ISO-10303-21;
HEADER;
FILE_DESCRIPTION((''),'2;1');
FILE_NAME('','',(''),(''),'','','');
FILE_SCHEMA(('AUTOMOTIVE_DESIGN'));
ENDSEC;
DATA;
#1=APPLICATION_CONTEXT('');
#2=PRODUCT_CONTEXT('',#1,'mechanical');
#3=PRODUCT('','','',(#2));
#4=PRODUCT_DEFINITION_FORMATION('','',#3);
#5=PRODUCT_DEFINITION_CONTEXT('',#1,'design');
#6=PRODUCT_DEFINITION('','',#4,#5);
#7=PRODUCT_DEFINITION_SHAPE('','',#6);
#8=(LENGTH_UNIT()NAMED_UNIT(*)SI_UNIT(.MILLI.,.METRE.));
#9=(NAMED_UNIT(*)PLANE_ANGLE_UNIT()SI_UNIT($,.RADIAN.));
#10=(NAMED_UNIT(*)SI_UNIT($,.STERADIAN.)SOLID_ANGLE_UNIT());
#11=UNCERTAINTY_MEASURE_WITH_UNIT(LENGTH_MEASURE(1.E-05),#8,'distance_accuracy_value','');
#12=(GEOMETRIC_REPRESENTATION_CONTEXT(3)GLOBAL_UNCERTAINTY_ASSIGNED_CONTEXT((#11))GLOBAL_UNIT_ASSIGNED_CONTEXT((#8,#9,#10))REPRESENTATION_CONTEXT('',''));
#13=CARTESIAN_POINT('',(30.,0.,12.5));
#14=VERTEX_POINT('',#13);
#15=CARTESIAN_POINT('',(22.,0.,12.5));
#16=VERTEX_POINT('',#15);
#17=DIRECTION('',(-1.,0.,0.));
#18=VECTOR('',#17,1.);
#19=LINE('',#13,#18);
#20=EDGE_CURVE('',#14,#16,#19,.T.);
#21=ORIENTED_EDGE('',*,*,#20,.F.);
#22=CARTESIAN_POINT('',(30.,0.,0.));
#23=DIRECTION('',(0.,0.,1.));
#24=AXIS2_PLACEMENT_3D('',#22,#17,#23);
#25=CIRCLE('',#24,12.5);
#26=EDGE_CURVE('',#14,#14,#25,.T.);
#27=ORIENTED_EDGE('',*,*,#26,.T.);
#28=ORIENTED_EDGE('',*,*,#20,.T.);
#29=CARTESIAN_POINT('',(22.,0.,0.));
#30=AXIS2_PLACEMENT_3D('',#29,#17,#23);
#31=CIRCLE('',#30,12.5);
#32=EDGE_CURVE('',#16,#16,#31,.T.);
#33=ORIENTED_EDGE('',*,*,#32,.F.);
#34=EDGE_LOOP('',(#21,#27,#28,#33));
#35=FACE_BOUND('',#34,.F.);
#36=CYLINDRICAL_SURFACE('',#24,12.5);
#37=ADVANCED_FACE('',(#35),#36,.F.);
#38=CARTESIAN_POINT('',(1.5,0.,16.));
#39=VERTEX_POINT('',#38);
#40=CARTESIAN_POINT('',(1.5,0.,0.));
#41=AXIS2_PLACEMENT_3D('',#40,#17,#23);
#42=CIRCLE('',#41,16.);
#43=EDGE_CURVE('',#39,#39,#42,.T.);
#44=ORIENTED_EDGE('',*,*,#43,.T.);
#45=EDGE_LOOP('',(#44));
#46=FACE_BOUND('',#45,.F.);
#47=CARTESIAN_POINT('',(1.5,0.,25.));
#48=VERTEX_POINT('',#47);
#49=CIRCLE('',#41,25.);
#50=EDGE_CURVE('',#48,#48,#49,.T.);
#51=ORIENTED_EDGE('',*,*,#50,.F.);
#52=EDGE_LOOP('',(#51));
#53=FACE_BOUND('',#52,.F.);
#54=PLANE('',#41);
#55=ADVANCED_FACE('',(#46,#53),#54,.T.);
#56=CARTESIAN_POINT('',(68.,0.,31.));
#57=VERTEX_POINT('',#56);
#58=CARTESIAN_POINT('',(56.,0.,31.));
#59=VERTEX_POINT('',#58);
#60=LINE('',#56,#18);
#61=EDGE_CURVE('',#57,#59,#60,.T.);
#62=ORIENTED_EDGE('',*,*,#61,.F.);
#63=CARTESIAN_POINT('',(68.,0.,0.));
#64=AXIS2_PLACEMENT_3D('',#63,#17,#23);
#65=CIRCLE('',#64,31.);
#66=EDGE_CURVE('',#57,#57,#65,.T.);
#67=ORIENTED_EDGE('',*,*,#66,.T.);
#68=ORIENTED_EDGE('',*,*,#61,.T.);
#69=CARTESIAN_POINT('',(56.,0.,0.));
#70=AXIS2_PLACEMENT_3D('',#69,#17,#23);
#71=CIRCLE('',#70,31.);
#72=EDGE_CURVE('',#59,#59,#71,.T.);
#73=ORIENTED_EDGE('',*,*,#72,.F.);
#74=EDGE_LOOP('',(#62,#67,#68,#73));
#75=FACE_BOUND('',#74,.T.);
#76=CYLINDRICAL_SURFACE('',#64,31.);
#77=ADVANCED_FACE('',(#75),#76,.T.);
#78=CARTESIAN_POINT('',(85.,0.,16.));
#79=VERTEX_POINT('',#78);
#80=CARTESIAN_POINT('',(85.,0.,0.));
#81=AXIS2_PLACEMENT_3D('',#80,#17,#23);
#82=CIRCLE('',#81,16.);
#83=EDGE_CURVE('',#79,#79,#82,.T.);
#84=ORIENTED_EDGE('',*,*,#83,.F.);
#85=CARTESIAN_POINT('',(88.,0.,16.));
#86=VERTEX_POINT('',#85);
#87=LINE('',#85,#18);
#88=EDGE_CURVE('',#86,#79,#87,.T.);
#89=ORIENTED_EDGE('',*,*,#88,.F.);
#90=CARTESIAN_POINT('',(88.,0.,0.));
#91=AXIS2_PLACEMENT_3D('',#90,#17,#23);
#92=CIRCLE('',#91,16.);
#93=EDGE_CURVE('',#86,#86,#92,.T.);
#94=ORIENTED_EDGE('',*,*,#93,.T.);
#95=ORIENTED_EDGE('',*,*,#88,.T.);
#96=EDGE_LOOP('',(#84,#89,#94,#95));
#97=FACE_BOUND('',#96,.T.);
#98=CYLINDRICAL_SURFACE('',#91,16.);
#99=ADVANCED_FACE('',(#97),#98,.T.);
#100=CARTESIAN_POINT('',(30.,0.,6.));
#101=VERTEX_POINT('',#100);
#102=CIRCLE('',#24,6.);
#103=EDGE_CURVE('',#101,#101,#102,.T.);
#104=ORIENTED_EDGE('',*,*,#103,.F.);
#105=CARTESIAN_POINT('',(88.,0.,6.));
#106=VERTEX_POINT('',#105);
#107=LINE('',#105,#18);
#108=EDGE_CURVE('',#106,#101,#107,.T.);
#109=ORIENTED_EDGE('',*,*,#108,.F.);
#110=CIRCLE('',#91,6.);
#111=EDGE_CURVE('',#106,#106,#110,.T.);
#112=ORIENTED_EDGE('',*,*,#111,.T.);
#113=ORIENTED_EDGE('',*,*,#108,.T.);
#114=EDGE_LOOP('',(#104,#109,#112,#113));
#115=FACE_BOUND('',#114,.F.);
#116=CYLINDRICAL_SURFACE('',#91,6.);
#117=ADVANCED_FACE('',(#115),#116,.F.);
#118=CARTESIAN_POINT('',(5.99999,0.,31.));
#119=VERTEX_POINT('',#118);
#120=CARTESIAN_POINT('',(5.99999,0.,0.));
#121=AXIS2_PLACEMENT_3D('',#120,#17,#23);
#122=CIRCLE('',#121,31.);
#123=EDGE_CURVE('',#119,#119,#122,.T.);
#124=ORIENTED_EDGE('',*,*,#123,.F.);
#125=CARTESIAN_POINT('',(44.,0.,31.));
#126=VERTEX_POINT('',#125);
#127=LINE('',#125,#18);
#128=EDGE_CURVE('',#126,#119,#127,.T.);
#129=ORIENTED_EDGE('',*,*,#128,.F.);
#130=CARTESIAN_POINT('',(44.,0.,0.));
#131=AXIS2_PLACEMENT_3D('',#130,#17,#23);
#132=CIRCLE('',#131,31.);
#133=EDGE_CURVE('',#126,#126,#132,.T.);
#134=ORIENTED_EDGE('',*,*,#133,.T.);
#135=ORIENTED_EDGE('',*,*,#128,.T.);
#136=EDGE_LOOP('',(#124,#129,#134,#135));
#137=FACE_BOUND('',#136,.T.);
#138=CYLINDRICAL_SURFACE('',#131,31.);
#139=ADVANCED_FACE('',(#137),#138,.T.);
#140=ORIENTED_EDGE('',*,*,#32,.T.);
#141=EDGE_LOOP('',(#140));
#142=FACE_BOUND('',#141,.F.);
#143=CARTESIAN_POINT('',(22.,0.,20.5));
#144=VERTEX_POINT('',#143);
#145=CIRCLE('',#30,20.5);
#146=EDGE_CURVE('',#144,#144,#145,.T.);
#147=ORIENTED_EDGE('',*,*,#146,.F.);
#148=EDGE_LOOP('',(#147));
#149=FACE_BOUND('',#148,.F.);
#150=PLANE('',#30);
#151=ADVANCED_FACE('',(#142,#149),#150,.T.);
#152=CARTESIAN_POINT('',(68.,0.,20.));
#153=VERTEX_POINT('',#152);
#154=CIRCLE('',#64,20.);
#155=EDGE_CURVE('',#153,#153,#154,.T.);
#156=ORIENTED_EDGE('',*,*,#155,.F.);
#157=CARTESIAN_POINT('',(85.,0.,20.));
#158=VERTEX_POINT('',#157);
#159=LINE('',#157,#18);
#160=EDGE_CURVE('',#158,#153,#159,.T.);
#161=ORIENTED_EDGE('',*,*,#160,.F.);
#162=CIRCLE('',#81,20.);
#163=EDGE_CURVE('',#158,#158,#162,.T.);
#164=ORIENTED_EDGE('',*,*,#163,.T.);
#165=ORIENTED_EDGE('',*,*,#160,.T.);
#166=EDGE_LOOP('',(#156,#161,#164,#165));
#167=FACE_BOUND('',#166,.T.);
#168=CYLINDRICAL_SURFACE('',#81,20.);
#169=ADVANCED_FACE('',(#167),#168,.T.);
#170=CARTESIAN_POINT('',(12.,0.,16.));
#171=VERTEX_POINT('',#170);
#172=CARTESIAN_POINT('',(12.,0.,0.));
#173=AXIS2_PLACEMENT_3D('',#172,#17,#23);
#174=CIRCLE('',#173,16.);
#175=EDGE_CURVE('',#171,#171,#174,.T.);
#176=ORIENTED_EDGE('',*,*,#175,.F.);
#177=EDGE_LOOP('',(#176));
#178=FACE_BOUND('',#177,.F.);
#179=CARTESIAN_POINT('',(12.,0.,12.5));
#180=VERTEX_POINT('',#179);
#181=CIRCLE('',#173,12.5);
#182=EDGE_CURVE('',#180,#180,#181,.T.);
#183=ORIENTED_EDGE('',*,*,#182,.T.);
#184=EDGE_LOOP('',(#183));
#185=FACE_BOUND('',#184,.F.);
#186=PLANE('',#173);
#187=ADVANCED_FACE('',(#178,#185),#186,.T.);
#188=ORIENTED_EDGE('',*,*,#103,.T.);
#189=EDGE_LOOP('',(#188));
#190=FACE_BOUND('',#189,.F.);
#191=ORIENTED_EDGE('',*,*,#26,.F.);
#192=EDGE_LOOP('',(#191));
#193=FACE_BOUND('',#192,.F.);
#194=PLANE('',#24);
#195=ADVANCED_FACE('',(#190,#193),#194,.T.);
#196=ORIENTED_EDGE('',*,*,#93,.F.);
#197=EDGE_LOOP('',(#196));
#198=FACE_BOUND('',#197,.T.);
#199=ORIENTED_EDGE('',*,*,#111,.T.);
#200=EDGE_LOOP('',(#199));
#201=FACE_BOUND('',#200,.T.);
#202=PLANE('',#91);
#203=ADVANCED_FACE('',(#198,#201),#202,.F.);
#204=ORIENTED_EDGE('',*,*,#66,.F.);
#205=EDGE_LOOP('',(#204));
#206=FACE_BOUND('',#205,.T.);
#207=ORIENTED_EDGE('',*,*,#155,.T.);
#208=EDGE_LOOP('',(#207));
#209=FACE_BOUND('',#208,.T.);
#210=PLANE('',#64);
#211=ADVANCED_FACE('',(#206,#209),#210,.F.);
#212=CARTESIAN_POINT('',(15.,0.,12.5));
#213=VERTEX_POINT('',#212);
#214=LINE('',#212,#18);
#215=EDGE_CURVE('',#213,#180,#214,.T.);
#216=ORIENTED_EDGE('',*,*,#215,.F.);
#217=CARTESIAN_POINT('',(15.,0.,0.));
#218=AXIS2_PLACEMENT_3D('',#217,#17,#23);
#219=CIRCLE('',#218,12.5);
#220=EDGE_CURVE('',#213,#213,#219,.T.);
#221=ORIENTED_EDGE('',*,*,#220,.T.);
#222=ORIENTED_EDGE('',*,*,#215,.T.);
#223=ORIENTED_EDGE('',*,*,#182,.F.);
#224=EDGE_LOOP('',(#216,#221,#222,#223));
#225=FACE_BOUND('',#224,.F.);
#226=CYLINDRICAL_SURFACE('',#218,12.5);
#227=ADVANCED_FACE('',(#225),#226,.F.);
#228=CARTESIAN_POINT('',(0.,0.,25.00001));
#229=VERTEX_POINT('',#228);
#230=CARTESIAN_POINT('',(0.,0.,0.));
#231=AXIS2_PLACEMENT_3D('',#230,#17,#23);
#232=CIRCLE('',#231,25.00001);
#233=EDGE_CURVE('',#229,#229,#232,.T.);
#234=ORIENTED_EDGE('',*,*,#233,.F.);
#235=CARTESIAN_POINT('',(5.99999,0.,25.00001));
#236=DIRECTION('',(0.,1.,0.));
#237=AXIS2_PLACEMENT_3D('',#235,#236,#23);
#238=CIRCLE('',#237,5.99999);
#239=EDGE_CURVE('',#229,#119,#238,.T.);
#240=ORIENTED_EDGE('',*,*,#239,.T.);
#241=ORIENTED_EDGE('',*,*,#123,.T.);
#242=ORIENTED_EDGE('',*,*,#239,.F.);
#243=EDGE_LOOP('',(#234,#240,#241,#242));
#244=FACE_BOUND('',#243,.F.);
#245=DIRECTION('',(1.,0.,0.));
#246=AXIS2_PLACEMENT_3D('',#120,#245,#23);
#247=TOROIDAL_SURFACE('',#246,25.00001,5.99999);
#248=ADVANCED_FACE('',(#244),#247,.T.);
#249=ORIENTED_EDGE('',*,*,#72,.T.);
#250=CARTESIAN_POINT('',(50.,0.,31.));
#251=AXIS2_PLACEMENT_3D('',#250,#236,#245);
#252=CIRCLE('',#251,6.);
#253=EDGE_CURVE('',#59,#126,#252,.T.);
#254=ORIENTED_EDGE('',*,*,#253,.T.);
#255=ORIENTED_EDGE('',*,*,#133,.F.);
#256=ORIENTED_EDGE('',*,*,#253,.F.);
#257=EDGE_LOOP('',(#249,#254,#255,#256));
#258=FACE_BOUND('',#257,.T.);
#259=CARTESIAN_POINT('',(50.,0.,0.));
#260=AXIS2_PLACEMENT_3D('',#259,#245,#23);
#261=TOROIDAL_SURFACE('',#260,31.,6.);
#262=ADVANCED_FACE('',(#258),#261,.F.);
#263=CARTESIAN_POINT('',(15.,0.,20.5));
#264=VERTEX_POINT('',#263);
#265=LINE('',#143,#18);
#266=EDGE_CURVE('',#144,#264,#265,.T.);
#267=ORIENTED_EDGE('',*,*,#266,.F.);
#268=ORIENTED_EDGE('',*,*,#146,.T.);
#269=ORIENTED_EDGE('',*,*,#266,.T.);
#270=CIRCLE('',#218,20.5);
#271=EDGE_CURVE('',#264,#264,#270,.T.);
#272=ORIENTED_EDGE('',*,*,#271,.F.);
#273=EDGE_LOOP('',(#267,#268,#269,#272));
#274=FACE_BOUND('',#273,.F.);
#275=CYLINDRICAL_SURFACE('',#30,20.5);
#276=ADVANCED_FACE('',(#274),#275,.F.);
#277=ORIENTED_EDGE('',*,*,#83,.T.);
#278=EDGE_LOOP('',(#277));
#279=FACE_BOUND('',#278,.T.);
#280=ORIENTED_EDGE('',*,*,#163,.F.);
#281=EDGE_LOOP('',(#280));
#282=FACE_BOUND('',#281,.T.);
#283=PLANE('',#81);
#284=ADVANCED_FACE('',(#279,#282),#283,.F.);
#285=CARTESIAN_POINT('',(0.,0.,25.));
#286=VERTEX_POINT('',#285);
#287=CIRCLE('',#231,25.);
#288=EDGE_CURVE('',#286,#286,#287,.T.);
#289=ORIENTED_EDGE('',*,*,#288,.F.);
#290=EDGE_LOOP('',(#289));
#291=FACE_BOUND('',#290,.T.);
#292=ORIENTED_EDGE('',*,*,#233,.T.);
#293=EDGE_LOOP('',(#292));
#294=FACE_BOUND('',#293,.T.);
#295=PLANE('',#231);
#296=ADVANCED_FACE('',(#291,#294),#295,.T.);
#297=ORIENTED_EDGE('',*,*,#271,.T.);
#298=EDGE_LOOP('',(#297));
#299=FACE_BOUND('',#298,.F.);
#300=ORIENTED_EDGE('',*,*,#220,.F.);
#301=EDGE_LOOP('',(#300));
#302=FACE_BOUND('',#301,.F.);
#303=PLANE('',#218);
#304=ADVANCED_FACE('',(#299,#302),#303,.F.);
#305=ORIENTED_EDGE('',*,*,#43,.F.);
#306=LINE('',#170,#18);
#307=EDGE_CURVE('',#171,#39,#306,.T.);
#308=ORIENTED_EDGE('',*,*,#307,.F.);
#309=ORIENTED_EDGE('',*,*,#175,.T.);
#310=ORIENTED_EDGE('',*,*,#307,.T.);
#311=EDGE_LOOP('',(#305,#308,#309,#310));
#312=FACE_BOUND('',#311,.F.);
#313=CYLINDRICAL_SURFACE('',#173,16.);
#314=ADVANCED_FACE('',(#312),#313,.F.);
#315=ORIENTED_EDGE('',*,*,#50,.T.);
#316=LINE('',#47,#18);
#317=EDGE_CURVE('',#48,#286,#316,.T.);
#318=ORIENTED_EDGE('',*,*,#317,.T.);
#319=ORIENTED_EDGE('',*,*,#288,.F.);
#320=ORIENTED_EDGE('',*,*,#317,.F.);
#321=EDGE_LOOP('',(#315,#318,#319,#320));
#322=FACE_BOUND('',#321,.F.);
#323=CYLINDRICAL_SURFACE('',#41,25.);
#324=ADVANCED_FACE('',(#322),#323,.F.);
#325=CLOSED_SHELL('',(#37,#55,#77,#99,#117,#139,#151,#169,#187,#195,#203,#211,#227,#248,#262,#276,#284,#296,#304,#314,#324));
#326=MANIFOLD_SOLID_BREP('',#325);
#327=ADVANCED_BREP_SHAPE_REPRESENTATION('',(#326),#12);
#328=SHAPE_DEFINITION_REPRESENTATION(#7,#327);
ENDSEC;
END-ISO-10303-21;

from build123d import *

# Parameters (mm, degrees)
F4_R = 5.99999


# Not quite as in the source:
# - a fillet or chamfer is up to 0.001 mm smaller than in the source, because OpenCascade refuses the exact size


with BuildPart() as f1:
    # F0 (on Front) → F1 (revolve)
    with BuildSketch(Plane.XZ):
        with BuildLine():
            Line((0, 31), (0, 0))
            Line((0, 0), (88, 0))
            Line((88, 0), (88, 16))
            Line((88, 16), (85, 16))
            Line((85, 16), (85, 20))
            Line((85, 20), (68, 20))
            Line((68, 20), (68, 31))
            Line((68, 31), (56, 31))
            ThreePointArc((56, 31), (50, 25), (44, 31))
            Line((44, 31), (0, 31))
        make_face()
    revolve(axis=Axis((-6.5542864613, 0, 0), (-1, 0, 0)))

    # F2 (on Front) → F3 (revolve, cut)
    with BuildSketch(Plane.XZ):
        Polygon((0, 25), (0, 0), (88, 0), (88, 6), (30, 6), (30, 12.5), (22, 12.5), (22, 20.5), (15, 20.5), (15, 12.5), (12, 12.5), (12, 16), (1.5, 16), (1.5, 25), align=None)
    revolve(axis=Axis((44, 0, 0), (-1, 0, 0)), mode=Mode.SUBTRACT)

    # F4 (radius 6 in the source; OpenCascade refuses exactly that, so slightly less here)
    f4_edges = [f1.edges().sort_by_distance(p)[0] for p in [
        (0, 0, -31),
    ]]
    fillet(f4_edges, radius=F4_R)


solid = f1.part
